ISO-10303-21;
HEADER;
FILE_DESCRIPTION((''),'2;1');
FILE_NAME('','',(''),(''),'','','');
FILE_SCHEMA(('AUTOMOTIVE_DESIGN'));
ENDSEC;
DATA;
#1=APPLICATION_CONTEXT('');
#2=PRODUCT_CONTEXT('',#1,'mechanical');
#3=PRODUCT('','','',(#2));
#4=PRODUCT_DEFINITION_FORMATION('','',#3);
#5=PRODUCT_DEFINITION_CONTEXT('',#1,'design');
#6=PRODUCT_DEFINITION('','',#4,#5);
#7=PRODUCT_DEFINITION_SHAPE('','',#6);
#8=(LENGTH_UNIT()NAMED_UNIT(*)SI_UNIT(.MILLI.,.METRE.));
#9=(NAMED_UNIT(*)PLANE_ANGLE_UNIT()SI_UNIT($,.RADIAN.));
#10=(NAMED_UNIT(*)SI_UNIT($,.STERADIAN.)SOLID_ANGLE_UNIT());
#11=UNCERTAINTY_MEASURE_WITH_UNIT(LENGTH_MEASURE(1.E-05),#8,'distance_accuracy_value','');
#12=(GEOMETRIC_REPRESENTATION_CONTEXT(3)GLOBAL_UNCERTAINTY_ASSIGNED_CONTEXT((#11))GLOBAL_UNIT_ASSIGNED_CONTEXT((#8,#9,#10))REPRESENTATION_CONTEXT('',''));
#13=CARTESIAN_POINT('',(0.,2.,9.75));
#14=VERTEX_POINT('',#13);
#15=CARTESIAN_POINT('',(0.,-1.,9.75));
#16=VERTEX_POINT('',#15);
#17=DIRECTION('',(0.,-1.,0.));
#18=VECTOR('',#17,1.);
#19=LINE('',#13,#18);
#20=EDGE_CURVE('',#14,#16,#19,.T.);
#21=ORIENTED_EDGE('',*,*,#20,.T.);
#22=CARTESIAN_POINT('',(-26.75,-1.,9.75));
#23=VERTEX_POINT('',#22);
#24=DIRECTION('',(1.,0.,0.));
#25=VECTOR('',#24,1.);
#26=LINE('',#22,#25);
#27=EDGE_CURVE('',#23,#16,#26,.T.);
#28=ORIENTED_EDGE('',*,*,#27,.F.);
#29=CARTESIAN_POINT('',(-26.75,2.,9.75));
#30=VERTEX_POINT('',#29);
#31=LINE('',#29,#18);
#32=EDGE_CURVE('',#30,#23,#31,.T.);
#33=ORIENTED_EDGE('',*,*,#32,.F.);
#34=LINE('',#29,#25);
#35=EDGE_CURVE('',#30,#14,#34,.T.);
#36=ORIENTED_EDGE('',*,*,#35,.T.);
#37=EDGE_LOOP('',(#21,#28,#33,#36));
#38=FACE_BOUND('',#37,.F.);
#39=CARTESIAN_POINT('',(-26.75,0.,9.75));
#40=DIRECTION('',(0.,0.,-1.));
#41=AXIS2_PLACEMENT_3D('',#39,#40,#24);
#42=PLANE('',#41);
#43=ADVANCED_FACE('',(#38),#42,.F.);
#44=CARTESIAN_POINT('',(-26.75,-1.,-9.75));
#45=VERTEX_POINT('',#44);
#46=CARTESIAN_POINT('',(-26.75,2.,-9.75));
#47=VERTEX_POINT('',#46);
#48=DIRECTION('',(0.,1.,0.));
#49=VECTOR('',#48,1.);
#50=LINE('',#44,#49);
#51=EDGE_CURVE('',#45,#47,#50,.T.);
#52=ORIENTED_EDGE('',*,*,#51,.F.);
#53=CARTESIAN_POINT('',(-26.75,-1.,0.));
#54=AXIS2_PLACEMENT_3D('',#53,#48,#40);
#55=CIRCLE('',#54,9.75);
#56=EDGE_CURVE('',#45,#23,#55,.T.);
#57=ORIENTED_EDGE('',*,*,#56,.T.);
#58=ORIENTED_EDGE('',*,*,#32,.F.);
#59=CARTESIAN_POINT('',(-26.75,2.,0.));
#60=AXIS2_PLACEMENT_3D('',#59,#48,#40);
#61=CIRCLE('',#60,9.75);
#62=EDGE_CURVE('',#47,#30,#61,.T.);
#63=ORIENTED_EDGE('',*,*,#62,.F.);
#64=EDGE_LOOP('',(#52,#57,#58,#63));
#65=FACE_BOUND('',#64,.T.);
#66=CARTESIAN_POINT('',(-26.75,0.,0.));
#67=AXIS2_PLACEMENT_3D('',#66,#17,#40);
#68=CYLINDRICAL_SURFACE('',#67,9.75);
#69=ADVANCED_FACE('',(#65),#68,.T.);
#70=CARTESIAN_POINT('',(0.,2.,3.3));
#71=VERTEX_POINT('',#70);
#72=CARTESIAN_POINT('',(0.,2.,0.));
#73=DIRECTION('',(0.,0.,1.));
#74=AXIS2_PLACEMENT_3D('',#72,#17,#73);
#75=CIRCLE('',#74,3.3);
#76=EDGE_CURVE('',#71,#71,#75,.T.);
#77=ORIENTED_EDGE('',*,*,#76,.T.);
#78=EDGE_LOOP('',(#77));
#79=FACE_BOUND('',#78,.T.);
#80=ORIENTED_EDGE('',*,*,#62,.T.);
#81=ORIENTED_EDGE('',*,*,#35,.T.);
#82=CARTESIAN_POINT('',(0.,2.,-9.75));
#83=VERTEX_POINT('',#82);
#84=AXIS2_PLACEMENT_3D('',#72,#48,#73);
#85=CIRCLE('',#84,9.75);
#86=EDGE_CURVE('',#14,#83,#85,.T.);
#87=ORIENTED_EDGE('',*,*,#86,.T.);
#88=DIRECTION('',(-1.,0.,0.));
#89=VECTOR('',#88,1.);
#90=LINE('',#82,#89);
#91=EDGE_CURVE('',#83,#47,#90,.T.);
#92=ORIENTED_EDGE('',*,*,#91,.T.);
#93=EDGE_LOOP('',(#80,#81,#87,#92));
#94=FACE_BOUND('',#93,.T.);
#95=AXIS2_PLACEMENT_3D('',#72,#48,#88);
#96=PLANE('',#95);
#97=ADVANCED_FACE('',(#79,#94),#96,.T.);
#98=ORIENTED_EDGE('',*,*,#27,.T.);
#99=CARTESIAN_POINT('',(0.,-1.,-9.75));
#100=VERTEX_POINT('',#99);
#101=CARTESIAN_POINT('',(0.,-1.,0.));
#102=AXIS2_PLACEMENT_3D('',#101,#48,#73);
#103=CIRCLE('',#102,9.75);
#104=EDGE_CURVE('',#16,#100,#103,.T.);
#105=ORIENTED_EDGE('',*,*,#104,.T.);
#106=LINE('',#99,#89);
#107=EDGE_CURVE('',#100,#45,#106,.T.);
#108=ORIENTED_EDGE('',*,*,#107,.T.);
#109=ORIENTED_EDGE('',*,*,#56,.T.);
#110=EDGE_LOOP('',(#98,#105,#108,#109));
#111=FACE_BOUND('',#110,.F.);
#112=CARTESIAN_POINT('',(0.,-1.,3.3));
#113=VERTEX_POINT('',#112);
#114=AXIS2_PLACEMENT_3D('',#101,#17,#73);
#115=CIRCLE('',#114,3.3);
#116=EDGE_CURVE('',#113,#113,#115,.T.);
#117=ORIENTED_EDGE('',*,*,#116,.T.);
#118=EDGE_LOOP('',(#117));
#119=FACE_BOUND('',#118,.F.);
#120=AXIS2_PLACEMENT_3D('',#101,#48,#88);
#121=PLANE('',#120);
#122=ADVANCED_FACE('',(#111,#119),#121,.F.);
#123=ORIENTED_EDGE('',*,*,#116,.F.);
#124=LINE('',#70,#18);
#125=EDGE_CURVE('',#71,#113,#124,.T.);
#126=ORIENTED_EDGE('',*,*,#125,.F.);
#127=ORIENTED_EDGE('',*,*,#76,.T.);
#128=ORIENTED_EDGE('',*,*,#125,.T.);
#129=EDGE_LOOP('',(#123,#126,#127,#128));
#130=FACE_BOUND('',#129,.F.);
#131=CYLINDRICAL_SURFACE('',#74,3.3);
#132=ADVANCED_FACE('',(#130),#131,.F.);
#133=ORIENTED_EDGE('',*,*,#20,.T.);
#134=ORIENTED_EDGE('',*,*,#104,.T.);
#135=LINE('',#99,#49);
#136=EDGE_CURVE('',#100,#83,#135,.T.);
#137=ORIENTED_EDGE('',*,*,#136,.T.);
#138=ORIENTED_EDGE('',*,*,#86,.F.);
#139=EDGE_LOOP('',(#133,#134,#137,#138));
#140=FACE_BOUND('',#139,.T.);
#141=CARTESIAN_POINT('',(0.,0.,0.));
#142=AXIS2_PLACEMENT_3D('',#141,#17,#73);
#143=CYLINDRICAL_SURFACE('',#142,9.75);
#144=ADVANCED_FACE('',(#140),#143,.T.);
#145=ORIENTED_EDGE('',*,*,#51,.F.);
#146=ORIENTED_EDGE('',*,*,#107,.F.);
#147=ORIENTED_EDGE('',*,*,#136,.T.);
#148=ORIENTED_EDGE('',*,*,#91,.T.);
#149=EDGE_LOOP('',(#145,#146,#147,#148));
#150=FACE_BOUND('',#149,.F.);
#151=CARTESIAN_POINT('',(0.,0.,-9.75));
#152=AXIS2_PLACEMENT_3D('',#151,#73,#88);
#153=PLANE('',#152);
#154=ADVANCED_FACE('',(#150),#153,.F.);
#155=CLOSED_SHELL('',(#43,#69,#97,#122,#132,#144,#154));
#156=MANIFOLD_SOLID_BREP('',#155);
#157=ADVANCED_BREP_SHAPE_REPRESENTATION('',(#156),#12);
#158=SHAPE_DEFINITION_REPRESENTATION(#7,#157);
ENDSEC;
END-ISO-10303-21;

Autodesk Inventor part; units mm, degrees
ref_plane "YZ Plane" through (0, 0, 0) normal (1, 0, 0) x (0, 1, 0)
ref_plane "XZ Plane" through (0, 0, 0) normal (0, 1, 0) x (-1, 0, 0)
ref_plane "XY Plane" through (0, 0, 0) normal (0, 0, 1) x (1, 0, 0)
sketch "Sketch1" plane through (0, 0, 0) normal (0, 1, 0) x (-1, 0, 0)
  line L0 (0, 0) -> (26.75, 0) construction
  line L1 (0, -9.75) -> (26.75, -9.75)
  line L2 (26.75, 9.75) -> (0, 9.75)
  arc A0 (0, 9.75) -> (0, -9.75) centre (0, 0) ccw
  arc A1 (26.75, -9.75) -> (26.75, 9.75) centre (26.75, 0) ccw
  point P0 (13.375, 0)
  dimension "d0" = 26.75
  dimension "d1" = 19.5
extrude "Extrusion1" add sketch "Sketch1" along normal blind 2 and the other way blind 1
sketch "Sketch2" plane through (0, 2, 0) normal (0, 1, 0) x (1, 0, 0)
  point P0 (0, 0)
hole "Hole1" at (0, 2, 0) direction (0, -1, 0) diameter 6.6 end up to surface clearance for "Countersunk Flat Head Screw ISO 2009/7046" size "M6" standard "ISO"
properties part number "SP36V1 Traba Cierre"
